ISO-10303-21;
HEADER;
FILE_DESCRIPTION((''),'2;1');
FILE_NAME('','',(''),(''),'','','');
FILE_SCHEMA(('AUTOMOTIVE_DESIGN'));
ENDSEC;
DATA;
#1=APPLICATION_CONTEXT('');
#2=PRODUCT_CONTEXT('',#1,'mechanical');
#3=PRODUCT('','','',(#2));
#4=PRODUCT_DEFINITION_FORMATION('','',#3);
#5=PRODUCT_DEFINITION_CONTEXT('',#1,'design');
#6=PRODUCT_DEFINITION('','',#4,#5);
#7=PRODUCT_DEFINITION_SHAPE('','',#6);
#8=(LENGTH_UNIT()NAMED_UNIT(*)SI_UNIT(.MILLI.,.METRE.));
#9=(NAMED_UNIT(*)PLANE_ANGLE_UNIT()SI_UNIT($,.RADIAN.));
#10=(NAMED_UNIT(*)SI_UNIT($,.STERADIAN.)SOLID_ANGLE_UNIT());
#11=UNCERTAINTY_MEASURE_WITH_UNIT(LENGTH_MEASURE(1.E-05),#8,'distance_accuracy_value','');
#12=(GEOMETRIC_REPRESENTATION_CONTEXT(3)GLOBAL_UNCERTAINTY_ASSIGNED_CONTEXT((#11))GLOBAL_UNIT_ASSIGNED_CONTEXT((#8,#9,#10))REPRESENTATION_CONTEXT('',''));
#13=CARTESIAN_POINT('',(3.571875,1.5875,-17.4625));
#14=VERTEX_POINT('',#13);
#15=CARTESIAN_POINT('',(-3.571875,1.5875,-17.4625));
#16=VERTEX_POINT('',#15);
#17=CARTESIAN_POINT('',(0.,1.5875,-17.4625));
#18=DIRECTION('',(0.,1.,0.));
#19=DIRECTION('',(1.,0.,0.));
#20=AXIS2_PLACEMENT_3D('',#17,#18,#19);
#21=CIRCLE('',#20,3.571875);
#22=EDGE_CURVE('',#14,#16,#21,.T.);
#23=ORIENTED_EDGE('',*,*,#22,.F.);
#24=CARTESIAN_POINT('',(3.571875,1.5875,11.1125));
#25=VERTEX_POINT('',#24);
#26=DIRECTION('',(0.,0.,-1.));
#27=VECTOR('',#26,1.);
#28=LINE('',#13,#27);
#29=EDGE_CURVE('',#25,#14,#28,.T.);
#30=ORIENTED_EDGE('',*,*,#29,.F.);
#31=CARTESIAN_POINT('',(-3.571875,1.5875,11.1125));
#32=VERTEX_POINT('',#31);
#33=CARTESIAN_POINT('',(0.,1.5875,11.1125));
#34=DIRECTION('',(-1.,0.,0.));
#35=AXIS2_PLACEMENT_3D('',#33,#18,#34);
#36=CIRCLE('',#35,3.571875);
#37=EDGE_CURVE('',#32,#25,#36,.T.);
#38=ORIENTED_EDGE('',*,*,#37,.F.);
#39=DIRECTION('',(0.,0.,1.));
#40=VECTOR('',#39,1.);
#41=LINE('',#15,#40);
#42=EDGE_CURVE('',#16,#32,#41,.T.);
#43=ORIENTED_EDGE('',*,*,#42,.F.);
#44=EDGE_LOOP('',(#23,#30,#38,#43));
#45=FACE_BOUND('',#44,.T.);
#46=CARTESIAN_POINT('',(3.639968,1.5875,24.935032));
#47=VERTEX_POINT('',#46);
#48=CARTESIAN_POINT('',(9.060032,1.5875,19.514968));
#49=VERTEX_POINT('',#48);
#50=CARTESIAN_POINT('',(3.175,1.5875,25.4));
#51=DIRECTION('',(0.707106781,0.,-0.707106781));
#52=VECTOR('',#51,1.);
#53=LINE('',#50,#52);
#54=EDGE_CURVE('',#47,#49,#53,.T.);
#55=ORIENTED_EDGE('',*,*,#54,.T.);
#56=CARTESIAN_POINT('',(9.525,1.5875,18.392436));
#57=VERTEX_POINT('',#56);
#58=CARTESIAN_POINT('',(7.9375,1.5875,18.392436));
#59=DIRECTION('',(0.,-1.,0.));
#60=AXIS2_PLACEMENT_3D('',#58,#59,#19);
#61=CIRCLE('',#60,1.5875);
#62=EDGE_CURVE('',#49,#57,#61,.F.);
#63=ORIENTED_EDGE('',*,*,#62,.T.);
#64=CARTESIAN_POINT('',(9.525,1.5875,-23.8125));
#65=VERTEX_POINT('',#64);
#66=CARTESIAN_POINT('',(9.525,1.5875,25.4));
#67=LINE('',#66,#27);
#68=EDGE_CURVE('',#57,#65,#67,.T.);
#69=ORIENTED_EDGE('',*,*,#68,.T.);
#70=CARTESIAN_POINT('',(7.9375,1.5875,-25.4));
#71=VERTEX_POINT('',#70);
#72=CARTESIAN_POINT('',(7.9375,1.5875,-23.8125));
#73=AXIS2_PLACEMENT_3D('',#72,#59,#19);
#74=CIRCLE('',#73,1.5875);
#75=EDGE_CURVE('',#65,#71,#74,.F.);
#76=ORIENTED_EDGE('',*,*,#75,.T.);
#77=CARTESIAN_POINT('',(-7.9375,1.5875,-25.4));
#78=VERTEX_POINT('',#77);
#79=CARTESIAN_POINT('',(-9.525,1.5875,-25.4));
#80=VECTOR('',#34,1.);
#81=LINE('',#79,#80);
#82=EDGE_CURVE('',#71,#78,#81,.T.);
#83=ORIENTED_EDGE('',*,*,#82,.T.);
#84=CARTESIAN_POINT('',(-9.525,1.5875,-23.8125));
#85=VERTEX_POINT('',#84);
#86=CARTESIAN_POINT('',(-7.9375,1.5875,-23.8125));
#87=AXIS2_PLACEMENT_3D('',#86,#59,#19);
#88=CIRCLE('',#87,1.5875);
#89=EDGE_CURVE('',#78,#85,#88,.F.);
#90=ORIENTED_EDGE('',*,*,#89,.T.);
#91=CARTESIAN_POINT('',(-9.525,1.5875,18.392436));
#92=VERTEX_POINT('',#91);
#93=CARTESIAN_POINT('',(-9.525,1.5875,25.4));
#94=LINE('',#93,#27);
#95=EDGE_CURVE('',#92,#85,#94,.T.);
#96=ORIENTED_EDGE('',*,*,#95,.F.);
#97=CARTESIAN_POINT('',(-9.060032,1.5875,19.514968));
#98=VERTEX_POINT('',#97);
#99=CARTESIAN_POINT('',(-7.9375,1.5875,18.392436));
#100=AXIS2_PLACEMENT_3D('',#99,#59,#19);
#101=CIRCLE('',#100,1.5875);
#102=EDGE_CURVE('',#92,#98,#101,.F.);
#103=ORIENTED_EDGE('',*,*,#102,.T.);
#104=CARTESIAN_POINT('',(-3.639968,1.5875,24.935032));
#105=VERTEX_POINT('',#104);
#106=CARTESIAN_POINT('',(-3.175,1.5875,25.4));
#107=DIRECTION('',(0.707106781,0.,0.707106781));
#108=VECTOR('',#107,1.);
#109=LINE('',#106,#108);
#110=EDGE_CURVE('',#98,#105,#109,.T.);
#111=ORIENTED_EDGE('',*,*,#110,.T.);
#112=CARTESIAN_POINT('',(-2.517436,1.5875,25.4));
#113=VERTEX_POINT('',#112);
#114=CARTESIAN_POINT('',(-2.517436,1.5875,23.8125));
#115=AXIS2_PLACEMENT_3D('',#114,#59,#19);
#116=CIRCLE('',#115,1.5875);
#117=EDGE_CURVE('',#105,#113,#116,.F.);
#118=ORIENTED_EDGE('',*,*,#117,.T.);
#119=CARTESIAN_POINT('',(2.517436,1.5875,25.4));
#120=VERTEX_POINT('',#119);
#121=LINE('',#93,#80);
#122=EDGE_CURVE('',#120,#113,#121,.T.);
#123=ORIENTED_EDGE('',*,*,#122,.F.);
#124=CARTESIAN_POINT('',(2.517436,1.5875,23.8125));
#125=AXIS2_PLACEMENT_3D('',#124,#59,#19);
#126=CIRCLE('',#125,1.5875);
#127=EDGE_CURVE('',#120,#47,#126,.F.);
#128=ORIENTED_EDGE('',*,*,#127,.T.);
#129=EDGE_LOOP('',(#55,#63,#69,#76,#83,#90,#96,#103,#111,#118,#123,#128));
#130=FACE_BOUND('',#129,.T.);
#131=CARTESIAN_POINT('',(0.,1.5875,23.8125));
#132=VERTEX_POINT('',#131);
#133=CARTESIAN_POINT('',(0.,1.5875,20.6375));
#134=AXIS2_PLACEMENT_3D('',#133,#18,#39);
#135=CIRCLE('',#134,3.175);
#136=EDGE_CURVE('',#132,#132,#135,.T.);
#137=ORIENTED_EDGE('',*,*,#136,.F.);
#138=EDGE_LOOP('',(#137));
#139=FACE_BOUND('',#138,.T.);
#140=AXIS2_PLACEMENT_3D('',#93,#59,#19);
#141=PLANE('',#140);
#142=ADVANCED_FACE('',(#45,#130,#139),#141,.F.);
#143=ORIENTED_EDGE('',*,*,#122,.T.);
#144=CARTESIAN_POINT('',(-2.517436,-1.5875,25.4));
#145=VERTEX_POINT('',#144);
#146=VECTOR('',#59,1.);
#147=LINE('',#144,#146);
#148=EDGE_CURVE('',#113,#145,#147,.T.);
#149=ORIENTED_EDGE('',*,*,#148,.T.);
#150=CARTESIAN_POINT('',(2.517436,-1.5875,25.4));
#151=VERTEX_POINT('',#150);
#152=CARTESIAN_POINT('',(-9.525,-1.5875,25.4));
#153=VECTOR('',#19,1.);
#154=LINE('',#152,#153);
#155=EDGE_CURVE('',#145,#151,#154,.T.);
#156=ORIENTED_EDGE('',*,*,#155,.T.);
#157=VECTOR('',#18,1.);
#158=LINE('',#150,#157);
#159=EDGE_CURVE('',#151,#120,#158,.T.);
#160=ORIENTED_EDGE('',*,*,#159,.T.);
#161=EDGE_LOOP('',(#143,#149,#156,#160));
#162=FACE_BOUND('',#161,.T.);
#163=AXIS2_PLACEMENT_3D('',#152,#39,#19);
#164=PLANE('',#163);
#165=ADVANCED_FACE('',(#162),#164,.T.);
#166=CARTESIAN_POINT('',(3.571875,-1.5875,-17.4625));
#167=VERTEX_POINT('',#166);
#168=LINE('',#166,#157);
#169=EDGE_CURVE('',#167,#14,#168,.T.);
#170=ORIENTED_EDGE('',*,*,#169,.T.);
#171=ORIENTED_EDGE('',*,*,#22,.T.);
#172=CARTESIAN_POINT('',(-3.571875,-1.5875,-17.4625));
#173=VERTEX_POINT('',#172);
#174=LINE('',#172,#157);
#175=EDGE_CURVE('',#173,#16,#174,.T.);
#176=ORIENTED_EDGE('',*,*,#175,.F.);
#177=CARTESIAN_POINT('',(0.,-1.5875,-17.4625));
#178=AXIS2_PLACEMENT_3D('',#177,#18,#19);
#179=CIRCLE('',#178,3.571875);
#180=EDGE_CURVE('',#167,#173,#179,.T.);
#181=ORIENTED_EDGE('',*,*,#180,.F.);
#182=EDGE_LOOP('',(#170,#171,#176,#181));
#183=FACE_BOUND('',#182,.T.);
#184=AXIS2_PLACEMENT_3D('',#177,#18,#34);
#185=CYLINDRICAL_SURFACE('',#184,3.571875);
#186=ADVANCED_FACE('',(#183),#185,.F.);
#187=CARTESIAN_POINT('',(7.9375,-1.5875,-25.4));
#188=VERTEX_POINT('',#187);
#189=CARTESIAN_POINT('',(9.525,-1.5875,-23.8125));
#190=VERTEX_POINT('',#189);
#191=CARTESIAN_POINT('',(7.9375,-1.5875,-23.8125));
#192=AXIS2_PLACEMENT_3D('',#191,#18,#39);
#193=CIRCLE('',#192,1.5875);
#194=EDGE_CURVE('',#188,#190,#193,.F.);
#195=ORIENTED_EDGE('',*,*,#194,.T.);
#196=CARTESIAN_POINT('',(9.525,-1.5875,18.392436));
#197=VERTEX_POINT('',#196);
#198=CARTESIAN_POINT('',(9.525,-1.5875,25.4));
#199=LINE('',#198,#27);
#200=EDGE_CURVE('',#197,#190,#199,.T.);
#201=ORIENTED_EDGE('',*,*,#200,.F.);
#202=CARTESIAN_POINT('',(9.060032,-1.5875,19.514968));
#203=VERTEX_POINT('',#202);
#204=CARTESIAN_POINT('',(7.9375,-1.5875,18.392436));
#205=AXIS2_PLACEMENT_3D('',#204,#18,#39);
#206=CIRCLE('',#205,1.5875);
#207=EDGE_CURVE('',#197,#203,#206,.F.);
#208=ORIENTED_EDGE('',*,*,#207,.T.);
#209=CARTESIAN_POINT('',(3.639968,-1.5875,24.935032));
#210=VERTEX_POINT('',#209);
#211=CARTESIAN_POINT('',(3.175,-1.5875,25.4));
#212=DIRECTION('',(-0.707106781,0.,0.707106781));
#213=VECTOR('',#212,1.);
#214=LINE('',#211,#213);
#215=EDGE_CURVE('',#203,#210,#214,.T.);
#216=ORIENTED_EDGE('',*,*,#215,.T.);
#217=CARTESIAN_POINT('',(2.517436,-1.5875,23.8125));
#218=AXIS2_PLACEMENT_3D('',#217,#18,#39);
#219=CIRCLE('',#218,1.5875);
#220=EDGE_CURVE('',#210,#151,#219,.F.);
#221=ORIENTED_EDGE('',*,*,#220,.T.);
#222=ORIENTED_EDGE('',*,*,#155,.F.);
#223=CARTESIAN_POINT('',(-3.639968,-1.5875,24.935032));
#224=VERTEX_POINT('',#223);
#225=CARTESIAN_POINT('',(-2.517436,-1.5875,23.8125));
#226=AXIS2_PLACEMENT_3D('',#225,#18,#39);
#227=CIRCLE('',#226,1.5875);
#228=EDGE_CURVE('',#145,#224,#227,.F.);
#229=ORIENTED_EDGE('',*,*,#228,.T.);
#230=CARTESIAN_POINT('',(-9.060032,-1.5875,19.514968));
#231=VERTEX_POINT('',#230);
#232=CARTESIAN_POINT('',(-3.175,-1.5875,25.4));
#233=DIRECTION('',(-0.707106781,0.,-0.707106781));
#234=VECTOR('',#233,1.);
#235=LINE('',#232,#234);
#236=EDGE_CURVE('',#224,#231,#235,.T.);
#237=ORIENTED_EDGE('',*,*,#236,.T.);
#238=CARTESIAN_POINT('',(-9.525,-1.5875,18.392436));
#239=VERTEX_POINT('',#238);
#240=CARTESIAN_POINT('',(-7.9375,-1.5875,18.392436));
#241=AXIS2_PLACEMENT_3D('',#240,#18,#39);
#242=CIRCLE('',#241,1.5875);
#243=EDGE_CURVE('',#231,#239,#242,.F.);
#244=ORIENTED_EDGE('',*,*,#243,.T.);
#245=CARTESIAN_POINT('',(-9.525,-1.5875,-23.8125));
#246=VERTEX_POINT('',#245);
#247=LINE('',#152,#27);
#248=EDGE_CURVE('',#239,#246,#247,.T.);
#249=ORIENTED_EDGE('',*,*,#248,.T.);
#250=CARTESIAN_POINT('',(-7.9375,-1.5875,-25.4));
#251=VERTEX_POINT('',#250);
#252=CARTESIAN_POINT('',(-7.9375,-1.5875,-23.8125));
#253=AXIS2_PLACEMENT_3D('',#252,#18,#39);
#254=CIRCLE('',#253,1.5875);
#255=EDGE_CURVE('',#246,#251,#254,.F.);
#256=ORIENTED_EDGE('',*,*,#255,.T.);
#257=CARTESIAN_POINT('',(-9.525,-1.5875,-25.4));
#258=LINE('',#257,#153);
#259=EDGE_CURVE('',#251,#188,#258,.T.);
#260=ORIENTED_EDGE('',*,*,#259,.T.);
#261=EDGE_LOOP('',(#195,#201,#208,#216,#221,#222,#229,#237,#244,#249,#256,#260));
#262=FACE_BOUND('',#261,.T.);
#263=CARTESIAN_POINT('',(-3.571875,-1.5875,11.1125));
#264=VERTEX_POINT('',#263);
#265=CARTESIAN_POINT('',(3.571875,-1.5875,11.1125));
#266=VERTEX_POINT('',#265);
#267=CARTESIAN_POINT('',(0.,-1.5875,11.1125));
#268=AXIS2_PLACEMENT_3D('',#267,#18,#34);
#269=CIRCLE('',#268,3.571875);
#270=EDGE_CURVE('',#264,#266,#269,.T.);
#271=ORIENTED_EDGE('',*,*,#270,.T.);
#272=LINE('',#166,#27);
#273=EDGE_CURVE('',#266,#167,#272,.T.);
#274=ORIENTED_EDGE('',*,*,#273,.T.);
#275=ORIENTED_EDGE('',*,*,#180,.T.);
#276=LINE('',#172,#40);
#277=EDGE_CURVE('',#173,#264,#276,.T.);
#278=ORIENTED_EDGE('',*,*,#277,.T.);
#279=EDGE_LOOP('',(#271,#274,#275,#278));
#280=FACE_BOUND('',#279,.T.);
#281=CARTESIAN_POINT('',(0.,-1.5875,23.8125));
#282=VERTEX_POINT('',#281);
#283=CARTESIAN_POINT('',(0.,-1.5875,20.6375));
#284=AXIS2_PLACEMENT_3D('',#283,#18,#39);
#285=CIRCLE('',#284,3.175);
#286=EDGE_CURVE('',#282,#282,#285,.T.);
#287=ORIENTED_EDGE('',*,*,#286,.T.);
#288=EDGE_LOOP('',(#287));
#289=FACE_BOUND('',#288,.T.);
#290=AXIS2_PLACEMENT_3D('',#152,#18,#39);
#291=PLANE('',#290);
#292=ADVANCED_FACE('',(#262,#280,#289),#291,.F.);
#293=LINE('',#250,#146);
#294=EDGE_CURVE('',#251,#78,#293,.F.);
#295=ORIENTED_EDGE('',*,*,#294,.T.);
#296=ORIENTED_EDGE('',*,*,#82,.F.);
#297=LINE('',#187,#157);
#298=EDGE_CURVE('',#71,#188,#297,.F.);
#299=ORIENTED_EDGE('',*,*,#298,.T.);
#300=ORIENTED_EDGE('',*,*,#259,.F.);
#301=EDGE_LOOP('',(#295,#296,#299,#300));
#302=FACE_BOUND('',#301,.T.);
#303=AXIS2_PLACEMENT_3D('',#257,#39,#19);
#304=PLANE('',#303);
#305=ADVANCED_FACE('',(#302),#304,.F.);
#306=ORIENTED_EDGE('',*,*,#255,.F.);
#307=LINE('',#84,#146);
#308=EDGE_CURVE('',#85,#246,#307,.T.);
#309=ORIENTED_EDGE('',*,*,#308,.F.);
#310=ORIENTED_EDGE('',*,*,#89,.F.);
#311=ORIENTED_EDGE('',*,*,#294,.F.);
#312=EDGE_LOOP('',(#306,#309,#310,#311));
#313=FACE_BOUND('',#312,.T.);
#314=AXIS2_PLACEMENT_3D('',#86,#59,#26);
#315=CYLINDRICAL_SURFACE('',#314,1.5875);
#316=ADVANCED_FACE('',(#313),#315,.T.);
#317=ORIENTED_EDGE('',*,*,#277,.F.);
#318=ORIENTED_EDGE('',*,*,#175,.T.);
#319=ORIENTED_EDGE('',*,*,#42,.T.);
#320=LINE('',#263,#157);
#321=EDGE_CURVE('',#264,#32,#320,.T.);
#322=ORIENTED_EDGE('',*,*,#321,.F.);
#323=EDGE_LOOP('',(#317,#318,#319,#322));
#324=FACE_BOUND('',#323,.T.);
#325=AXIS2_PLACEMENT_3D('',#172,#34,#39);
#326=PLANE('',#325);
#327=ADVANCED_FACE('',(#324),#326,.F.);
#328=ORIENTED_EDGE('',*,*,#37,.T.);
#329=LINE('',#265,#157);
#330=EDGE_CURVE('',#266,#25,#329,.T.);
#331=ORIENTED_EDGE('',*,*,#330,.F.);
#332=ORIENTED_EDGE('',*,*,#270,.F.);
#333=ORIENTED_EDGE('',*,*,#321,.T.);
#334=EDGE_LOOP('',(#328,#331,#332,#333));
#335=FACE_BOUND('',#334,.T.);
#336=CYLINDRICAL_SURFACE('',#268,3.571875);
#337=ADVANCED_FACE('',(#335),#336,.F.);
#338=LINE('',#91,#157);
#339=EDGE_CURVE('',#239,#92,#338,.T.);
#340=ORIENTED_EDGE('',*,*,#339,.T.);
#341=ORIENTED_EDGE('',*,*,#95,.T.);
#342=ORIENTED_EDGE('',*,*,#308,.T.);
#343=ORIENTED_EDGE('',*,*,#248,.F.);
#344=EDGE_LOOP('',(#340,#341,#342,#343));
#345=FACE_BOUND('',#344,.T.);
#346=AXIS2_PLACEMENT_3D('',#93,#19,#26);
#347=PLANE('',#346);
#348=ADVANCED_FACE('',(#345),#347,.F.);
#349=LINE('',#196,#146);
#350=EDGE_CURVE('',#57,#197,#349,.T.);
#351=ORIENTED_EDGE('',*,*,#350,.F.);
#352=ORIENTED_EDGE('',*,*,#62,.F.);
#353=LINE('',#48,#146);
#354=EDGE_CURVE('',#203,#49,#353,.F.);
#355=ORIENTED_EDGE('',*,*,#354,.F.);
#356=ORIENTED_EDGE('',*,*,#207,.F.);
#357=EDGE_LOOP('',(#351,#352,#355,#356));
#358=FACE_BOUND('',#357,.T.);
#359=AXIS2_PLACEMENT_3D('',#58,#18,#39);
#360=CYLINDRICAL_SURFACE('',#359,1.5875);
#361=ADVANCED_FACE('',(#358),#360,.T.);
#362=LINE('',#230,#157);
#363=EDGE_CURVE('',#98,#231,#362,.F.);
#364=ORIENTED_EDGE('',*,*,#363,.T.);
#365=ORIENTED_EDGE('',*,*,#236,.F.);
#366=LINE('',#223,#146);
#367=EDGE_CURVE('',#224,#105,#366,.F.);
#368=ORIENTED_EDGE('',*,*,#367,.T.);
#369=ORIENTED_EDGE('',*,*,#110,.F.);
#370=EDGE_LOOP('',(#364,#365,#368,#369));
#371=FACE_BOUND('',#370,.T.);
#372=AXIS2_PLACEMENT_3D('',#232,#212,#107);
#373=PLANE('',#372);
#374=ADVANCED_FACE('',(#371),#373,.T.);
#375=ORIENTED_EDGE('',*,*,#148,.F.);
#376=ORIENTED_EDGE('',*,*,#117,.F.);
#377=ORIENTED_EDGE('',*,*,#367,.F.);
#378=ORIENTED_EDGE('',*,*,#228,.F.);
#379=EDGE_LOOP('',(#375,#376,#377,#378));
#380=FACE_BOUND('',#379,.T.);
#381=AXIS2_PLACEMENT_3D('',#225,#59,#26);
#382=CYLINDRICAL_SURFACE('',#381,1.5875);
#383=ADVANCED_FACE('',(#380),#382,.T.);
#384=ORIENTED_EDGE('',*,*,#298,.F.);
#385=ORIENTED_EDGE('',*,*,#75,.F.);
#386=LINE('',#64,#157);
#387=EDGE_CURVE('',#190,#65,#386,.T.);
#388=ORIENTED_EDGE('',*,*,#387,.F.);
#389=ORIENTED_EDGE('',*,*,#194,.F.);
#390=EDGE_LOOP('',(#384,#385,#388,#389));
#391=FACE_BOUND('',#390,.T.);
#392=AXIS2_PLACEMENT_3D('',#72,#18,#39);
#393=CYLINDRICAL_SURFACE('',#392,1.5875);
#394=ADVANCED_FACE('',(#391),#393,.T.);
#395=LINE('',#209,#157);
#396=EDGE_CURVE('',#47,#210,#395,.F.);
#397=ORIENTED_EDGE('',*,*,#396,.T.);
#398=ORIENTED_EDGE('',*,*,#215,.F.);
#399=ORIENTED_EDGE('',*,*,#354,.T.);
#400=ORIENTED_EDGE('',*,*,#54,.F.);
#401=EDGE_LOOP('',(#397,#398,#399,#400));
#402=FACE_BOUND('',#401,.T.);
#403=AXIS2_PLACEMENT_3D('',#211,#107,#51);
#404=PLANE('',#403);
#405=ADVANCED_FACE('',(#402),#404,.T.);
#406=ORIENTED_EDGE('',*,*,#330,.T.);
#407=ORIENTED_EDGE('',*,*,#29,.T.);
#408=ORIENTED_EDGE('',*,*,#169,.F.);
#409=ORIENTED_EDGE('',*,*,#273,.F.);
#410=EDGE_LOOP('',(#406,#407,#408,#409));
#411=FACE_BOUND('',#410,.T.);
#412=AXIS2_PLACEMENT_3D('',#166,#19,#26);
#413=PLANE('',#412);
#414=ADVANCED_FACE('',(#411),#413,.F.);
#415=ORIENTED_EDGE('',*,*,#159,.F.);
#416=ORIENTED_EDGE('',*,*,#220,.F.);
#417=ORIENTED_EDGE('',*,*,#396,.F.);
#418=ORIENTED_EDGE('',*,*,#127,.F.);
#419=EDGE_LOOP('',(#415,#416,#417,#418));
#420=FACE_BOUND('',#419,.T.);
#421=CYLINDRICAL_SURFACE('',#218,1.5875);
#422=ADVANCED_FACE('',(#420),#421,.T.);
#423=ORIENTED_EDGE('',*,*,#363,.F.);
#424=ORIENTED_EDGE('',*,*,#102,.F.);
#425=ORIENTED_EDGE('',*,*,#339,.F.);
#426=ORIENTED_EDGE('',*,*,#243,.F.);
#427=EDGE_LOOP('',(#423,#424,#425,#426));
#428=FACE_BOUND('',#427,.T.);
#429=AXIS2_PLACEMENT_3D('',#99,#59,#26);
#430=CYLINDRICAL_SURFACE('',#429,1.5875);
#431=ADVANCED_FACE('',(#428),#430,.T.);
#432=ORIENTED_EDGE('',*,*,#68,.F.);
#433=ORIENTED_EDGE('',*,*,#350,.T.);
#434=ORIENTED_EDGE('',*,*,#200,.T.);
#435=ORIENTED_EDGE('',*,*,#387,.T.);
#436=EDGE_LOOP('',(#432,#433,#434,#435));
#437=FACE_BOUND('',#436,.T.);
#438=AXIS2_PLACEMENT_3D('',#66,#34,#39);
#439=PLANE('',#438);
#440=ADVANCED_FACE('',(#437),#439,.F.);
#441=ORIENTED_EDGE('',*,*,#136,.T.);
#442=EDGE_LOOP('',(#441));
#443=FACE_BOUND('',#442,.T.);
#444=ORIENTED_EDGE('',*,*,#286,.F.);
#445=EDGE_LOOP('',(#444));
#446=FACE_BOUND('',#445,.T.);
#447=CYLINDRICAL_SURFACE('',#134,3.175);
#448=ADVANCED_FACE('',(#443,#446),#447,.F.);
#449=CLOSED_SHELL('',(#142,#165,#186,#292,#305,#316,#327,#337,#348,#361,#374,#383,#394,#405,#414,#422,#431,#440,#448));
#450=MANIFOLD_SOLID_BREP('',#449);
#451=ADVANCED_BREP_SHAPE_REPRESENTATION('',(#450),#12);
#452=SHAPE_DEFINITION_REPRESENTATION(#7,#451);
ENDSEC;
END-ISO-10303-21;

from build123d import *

# Parameters (mm, degrees)
SKETCH1_W                   = 19.05
SKETCH1_H                   = 3.175
EXTRUDE1_DEPTH              = 25.4
CUT_EXTRUDE1_DEPTH          = 28.312382723
CHAMFER1_SIZE               = 6.35
F_1_4_0_25_DIAMETER_HOLE1_D = 6.35
FILLET1_R                   = 1.5875


with BuildPart() as part:
    # Sketch1 → Extrude1 (new, symmetric)
    with BuildSketch(Plane.XY):
        Rectangle(SKETCH1_W, SKETCH1_H)
    extrude(amount=EXTRUDE1_DEPTH, both=True)

    # Sketch2 → Cut-Extrude1 (cut, through all)
    with BuildSketch(Plane(origin=(0, 1.5875, 0), x_dir=(-1, 0, 0), z_dir=(0, 1, 0))):
        with BuildLine():
            Line((3.571875, -17.4625), (3.571875, 11.1125))
            ThreePointArc((3.571875, 11.1125), (0, 14.684375), (-3.571875, 11.1125))
            Line((-3.571875, 11.1125), (-3.571875, -17.4625))
            ThreePointArc((-3.571875, -17.4625), (0, -21.034375), (3.571875, -17.4625))
        make_face()
    extrude(amount=-CUT_EXTRUDE1_DEPTH, mode=Mode.SUBTRACT)

    # Chamfer1
    chamfer1_edges = [part.edges().sort_by_distance(p)[0] for p in [
        (9.525, 0, 25.4),
        (-9.525, 0, 25.4),
    ]]
    chamfer(chamfer1_edges, length=CHAMFER1_SIZE)

    # 1/4 (0.25) Diameter Hole1 (through all)
    with Locations(Plane(origin=(0, 1.5875, 0), x_dir=(-1, 0, 0), z_dir=(0, 1, 0))):
        with Locations((0, 20.6375)):
            Hole(F_1_4_0_25_DIAMETER_HOLE1_D / 2)

    # Fillet1
    fillet1_edges = [part.edges().sort_by_distance(p)[0] for p in [
        (3.175, 0, 25.4),
        (-3.175, 0, 25.4),
        (-9.525, 0, 19.05),
        (9.525, 0, 19.05),
        (9.525, 0, -25.4),
        (-9.525, 0, -25.4),
    ]]
    fillet(fillet1_edges, radius=FILLET1_R)


solid = part.part
